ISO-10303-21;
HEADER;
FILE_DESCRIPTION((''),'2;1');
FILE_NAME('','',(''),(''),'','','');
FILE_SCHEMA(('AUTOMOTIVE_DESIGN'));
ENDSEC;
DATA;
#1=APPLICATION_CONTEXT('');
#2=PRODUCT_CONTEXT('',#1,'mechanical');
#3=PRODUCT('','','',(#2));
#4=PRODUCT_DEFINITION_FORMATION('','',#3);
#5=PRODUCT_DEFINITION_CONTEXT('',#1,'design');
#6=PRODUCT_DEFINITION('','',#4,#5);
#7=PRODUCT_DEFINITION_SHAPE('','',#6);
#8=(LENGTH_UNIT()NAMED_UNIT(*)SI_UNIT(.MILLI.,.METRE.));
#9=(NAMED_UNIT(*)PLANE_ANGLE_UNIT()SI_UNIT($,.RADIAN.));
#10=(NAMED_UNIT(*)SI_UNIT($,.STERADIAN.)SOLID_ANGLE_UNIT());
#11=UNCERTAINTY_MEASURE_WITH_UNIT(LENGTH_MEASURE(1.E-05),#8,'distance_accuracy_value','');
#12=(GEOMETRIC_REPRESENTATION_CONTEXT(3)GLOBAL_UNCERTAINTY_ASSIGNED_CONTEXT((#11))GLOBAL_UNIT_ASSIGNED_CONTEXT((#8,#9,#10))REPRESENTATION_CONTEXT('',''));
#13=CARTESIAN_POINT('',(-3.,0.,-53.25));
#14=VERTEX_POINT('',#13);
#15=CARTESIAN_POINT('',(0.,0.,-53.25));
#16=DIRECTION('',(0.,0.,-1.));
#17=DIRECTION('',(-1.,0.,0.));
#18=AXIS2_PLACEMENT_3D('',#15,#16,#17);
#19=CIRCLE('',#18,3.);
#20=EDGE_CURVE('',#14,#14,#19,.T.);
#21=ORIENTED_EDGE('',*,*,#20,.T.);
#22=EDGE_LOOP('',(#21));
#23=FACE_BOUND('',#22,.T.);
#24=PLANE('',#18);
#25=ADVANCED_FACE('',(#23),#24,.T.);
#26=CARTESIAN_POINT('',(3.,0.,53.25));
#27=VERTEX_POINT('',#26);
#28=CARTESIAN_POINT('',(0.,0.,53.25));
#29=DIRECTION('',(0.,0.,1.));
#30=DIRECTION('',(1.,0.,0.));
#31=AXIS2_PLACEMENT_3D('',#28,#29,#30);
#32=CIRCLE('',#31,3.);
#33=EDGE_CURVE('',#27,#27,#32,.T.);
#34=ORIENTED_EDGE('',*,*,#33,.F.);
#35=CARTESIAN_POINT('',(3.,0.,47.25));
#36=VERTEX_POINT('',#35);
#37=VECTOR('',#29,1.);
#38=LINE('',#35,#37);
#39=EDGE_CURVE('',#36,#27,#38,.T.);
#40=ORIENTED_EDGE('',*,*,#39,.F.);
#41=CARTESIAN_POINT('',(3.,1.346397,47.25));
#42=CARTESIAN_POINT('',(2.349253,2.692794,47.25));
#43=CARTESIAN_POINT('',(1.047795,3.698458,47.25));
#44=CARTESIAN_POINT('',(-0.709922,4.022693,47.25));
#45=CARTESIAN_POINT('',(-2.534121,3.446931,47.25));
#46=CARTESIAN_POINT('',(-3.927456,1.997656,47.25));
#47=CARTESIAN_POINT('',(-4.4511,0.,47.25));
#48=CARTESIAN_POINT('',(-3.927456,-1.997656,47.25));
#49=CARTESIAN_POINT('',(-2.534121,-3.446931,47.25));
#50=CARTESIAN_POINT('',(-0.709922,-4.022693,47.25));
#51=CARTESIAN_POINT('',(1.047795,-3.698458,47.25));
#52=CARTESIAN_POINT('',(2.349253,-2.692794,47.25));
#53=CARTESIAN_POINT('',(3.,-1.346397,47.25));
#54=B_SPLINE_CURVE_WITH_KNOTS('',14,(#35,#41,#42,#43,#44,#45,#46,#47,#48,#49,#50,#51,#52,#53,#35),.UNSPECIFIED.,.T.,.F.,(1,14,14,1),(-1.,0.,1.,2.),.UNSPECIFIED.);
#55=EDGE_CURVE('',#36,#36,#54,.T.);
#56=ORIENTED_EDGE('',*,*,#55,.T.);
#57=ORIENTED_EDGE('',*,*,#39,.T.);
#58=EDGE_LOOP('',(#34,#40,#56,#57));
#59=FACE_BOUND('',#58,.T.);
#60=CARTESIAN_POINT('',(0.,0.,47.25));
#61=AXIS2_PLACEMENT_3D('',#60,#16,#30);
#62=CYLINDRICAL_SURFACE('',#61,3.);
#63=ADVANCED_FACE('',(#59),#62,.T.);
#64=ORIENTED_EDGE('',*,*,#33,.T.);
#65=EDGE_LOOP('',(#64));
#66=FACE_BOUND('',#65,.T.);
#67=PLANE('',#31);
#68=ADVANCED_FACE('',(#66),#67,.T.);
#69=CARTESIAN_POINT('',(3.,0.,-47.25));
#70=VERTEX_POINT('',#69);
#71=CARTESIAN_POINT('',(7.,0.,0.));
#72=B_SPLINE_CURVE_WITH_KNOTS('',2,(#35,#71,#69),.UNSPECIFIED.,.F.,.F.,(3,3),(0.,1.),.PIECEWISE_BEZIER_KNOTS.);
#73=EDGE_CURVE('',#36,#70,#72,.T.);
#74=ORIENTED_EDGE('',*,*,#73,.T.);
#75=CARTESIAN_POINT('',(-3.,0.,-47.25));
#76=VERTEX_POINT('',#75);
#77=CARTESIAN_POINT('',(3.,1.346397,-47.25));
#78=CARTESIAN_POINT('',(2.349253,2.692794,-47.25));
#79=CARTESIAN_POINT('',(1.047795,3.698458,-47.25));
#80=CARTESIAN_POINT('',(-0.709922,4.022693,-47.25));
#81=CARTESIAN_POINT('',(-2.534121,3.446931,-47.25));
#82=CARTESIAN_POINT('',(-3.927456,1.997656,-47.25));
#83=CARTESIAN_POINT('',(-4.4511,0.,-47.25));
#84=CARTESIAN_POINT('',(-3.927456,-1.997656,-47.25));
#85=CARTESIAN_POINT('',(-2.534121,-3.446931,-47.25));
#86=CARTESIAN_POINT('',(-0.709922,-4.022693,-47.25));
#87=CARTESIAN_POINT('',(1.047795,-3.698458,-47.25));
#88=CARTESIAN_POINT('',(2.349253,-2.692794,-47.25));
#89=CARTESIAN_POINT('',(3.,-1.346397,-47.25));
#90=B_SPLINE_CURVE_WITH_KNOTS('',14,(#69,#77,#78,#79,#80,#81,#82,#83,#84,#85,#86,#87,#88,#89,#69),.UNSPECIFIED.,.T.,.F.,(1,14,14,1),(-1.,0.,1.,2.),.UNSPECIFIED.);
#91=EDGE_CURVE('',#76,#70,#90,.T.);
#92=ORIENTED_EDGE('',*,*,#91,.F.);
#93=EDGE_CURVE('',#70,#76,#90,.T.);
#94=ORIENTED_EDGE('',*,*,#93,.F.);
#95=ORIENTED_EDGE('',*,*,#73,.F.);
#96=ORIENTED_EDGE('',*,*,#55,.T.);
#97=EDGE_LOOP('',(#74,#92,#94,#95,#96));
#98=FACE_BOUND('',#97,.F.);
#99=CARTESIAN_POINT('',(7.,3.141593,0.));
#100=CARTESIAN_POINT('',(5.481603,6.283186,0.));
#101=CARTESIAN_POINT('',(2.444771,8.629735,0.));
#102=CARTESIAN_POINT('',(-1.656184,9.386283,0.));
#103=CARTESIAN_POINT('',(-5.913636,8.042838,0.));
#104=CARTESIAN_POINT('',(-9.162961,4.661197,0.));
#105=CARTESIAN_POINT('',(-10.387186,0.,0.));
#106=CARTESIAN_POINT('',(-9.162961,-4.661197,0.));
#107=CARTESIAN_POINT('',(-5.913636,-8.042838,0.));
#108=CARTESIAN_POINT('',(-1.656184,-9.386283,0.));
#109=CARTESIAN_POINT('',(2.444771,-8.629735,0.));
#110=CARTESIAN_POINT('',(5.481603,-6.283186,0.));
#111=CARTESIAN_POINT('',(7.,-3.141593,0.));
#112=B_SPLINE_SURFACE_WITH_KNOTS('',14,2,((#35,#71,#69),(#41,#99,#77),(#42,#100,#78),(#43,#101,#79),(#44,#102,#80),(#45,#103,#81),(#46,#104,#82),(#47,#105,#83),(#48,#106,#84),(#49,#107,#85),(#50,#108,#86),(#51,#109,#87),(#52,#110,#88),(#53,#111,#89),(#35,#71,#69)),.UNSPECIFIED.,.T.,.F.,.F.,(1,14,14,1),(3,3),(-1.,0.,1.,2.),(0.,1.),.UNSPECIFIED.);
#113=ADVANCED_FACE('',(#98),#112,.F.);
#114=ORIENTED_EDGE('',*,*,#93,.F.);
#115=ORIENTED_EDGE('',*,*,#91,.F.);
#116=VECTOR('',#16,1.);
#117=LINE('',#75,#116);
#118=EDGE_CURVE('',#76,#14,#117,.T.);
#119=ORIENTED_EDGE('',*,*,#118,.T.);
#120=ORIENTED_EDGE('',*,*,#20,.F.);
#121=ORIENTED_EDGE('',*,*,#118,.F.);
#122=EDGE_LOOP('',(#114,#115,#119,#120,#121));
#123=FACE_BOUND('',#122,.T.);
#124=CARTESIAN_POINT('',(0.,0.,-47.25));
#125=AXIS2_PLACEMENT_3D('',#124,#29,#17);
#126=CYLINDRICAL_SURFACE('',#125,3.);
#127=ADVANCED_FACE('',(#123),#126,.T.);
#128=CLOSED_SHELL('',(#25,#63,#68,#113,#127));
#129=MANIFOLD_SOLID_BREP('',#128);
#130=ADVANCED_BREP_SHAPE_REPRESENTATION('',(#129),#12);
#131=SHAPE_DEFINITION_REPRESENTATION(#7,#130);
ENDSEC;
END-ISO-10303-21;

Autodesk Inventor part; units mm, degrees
ref_plane "YZ Plane" through (0, 0, 0) normal (1, 0, 0) x (0, 1, 0)
sketch "Sketch1" plane through (0, 0, 0) normal (0, 0, 1) x (1, 0, 0)
  circle A0 centre (0, 0) radius 5
  dimension "d0" = 10
ref_plane "Work Plane1" through (0, 0, 47.25) normal (0, 0, 1) x (1, 0, 0)
ref_plane "Work Plane2" through (0, 0, -47.25) normal (0, 0, 1) x (1, 0, 0)
sketch "Sketch2" plane through (0, 0, -47.25) normal (0, 0, 1) x (1, 0, 0)
  circle A0 centre (0, 0) radius 3
  dimension "d3" = 6
sketch "Sketch3" plane through (0, 0, 47.25) normal (0, 0, 1) x (1, 0, 0)
  circle A0 centre (0, 0) radius 3
  dimension "d4" = 6
loft "Loft1" add profiles "Sketch3", "Sketch1", "Sketch2"
sketch "Sketch4" plane through (0, 0, 47.25) normal (0, 0, 1) x (1, 0, 0)
  circle A0 centre (0, 0) radius 3 projected
  point P0 (3, 0)
extrude "Extrusion1" add sketch "Sketch4" along normal blind 6
sketch "Sketch5" plane through (0, 0, -47.25) normal (0, 0, -1) x (-1, 0, 0)
  circle A0 centre (0, 0) radius 3 projected
  point P0 (-3, 0)
extrude "Extrusion2" add sketch "Sketch5" along normal blind 6
thread "Thread1" size "M6x1" class "6g" standard "ANSI Metric M Profile" length 6
thread "Thread2" size "M6x1" class "6g" standard "ANSI Metric M Profile" length 6
properties part number "16A - Con Rod" material "Steel AISI 1020 107 HR"
